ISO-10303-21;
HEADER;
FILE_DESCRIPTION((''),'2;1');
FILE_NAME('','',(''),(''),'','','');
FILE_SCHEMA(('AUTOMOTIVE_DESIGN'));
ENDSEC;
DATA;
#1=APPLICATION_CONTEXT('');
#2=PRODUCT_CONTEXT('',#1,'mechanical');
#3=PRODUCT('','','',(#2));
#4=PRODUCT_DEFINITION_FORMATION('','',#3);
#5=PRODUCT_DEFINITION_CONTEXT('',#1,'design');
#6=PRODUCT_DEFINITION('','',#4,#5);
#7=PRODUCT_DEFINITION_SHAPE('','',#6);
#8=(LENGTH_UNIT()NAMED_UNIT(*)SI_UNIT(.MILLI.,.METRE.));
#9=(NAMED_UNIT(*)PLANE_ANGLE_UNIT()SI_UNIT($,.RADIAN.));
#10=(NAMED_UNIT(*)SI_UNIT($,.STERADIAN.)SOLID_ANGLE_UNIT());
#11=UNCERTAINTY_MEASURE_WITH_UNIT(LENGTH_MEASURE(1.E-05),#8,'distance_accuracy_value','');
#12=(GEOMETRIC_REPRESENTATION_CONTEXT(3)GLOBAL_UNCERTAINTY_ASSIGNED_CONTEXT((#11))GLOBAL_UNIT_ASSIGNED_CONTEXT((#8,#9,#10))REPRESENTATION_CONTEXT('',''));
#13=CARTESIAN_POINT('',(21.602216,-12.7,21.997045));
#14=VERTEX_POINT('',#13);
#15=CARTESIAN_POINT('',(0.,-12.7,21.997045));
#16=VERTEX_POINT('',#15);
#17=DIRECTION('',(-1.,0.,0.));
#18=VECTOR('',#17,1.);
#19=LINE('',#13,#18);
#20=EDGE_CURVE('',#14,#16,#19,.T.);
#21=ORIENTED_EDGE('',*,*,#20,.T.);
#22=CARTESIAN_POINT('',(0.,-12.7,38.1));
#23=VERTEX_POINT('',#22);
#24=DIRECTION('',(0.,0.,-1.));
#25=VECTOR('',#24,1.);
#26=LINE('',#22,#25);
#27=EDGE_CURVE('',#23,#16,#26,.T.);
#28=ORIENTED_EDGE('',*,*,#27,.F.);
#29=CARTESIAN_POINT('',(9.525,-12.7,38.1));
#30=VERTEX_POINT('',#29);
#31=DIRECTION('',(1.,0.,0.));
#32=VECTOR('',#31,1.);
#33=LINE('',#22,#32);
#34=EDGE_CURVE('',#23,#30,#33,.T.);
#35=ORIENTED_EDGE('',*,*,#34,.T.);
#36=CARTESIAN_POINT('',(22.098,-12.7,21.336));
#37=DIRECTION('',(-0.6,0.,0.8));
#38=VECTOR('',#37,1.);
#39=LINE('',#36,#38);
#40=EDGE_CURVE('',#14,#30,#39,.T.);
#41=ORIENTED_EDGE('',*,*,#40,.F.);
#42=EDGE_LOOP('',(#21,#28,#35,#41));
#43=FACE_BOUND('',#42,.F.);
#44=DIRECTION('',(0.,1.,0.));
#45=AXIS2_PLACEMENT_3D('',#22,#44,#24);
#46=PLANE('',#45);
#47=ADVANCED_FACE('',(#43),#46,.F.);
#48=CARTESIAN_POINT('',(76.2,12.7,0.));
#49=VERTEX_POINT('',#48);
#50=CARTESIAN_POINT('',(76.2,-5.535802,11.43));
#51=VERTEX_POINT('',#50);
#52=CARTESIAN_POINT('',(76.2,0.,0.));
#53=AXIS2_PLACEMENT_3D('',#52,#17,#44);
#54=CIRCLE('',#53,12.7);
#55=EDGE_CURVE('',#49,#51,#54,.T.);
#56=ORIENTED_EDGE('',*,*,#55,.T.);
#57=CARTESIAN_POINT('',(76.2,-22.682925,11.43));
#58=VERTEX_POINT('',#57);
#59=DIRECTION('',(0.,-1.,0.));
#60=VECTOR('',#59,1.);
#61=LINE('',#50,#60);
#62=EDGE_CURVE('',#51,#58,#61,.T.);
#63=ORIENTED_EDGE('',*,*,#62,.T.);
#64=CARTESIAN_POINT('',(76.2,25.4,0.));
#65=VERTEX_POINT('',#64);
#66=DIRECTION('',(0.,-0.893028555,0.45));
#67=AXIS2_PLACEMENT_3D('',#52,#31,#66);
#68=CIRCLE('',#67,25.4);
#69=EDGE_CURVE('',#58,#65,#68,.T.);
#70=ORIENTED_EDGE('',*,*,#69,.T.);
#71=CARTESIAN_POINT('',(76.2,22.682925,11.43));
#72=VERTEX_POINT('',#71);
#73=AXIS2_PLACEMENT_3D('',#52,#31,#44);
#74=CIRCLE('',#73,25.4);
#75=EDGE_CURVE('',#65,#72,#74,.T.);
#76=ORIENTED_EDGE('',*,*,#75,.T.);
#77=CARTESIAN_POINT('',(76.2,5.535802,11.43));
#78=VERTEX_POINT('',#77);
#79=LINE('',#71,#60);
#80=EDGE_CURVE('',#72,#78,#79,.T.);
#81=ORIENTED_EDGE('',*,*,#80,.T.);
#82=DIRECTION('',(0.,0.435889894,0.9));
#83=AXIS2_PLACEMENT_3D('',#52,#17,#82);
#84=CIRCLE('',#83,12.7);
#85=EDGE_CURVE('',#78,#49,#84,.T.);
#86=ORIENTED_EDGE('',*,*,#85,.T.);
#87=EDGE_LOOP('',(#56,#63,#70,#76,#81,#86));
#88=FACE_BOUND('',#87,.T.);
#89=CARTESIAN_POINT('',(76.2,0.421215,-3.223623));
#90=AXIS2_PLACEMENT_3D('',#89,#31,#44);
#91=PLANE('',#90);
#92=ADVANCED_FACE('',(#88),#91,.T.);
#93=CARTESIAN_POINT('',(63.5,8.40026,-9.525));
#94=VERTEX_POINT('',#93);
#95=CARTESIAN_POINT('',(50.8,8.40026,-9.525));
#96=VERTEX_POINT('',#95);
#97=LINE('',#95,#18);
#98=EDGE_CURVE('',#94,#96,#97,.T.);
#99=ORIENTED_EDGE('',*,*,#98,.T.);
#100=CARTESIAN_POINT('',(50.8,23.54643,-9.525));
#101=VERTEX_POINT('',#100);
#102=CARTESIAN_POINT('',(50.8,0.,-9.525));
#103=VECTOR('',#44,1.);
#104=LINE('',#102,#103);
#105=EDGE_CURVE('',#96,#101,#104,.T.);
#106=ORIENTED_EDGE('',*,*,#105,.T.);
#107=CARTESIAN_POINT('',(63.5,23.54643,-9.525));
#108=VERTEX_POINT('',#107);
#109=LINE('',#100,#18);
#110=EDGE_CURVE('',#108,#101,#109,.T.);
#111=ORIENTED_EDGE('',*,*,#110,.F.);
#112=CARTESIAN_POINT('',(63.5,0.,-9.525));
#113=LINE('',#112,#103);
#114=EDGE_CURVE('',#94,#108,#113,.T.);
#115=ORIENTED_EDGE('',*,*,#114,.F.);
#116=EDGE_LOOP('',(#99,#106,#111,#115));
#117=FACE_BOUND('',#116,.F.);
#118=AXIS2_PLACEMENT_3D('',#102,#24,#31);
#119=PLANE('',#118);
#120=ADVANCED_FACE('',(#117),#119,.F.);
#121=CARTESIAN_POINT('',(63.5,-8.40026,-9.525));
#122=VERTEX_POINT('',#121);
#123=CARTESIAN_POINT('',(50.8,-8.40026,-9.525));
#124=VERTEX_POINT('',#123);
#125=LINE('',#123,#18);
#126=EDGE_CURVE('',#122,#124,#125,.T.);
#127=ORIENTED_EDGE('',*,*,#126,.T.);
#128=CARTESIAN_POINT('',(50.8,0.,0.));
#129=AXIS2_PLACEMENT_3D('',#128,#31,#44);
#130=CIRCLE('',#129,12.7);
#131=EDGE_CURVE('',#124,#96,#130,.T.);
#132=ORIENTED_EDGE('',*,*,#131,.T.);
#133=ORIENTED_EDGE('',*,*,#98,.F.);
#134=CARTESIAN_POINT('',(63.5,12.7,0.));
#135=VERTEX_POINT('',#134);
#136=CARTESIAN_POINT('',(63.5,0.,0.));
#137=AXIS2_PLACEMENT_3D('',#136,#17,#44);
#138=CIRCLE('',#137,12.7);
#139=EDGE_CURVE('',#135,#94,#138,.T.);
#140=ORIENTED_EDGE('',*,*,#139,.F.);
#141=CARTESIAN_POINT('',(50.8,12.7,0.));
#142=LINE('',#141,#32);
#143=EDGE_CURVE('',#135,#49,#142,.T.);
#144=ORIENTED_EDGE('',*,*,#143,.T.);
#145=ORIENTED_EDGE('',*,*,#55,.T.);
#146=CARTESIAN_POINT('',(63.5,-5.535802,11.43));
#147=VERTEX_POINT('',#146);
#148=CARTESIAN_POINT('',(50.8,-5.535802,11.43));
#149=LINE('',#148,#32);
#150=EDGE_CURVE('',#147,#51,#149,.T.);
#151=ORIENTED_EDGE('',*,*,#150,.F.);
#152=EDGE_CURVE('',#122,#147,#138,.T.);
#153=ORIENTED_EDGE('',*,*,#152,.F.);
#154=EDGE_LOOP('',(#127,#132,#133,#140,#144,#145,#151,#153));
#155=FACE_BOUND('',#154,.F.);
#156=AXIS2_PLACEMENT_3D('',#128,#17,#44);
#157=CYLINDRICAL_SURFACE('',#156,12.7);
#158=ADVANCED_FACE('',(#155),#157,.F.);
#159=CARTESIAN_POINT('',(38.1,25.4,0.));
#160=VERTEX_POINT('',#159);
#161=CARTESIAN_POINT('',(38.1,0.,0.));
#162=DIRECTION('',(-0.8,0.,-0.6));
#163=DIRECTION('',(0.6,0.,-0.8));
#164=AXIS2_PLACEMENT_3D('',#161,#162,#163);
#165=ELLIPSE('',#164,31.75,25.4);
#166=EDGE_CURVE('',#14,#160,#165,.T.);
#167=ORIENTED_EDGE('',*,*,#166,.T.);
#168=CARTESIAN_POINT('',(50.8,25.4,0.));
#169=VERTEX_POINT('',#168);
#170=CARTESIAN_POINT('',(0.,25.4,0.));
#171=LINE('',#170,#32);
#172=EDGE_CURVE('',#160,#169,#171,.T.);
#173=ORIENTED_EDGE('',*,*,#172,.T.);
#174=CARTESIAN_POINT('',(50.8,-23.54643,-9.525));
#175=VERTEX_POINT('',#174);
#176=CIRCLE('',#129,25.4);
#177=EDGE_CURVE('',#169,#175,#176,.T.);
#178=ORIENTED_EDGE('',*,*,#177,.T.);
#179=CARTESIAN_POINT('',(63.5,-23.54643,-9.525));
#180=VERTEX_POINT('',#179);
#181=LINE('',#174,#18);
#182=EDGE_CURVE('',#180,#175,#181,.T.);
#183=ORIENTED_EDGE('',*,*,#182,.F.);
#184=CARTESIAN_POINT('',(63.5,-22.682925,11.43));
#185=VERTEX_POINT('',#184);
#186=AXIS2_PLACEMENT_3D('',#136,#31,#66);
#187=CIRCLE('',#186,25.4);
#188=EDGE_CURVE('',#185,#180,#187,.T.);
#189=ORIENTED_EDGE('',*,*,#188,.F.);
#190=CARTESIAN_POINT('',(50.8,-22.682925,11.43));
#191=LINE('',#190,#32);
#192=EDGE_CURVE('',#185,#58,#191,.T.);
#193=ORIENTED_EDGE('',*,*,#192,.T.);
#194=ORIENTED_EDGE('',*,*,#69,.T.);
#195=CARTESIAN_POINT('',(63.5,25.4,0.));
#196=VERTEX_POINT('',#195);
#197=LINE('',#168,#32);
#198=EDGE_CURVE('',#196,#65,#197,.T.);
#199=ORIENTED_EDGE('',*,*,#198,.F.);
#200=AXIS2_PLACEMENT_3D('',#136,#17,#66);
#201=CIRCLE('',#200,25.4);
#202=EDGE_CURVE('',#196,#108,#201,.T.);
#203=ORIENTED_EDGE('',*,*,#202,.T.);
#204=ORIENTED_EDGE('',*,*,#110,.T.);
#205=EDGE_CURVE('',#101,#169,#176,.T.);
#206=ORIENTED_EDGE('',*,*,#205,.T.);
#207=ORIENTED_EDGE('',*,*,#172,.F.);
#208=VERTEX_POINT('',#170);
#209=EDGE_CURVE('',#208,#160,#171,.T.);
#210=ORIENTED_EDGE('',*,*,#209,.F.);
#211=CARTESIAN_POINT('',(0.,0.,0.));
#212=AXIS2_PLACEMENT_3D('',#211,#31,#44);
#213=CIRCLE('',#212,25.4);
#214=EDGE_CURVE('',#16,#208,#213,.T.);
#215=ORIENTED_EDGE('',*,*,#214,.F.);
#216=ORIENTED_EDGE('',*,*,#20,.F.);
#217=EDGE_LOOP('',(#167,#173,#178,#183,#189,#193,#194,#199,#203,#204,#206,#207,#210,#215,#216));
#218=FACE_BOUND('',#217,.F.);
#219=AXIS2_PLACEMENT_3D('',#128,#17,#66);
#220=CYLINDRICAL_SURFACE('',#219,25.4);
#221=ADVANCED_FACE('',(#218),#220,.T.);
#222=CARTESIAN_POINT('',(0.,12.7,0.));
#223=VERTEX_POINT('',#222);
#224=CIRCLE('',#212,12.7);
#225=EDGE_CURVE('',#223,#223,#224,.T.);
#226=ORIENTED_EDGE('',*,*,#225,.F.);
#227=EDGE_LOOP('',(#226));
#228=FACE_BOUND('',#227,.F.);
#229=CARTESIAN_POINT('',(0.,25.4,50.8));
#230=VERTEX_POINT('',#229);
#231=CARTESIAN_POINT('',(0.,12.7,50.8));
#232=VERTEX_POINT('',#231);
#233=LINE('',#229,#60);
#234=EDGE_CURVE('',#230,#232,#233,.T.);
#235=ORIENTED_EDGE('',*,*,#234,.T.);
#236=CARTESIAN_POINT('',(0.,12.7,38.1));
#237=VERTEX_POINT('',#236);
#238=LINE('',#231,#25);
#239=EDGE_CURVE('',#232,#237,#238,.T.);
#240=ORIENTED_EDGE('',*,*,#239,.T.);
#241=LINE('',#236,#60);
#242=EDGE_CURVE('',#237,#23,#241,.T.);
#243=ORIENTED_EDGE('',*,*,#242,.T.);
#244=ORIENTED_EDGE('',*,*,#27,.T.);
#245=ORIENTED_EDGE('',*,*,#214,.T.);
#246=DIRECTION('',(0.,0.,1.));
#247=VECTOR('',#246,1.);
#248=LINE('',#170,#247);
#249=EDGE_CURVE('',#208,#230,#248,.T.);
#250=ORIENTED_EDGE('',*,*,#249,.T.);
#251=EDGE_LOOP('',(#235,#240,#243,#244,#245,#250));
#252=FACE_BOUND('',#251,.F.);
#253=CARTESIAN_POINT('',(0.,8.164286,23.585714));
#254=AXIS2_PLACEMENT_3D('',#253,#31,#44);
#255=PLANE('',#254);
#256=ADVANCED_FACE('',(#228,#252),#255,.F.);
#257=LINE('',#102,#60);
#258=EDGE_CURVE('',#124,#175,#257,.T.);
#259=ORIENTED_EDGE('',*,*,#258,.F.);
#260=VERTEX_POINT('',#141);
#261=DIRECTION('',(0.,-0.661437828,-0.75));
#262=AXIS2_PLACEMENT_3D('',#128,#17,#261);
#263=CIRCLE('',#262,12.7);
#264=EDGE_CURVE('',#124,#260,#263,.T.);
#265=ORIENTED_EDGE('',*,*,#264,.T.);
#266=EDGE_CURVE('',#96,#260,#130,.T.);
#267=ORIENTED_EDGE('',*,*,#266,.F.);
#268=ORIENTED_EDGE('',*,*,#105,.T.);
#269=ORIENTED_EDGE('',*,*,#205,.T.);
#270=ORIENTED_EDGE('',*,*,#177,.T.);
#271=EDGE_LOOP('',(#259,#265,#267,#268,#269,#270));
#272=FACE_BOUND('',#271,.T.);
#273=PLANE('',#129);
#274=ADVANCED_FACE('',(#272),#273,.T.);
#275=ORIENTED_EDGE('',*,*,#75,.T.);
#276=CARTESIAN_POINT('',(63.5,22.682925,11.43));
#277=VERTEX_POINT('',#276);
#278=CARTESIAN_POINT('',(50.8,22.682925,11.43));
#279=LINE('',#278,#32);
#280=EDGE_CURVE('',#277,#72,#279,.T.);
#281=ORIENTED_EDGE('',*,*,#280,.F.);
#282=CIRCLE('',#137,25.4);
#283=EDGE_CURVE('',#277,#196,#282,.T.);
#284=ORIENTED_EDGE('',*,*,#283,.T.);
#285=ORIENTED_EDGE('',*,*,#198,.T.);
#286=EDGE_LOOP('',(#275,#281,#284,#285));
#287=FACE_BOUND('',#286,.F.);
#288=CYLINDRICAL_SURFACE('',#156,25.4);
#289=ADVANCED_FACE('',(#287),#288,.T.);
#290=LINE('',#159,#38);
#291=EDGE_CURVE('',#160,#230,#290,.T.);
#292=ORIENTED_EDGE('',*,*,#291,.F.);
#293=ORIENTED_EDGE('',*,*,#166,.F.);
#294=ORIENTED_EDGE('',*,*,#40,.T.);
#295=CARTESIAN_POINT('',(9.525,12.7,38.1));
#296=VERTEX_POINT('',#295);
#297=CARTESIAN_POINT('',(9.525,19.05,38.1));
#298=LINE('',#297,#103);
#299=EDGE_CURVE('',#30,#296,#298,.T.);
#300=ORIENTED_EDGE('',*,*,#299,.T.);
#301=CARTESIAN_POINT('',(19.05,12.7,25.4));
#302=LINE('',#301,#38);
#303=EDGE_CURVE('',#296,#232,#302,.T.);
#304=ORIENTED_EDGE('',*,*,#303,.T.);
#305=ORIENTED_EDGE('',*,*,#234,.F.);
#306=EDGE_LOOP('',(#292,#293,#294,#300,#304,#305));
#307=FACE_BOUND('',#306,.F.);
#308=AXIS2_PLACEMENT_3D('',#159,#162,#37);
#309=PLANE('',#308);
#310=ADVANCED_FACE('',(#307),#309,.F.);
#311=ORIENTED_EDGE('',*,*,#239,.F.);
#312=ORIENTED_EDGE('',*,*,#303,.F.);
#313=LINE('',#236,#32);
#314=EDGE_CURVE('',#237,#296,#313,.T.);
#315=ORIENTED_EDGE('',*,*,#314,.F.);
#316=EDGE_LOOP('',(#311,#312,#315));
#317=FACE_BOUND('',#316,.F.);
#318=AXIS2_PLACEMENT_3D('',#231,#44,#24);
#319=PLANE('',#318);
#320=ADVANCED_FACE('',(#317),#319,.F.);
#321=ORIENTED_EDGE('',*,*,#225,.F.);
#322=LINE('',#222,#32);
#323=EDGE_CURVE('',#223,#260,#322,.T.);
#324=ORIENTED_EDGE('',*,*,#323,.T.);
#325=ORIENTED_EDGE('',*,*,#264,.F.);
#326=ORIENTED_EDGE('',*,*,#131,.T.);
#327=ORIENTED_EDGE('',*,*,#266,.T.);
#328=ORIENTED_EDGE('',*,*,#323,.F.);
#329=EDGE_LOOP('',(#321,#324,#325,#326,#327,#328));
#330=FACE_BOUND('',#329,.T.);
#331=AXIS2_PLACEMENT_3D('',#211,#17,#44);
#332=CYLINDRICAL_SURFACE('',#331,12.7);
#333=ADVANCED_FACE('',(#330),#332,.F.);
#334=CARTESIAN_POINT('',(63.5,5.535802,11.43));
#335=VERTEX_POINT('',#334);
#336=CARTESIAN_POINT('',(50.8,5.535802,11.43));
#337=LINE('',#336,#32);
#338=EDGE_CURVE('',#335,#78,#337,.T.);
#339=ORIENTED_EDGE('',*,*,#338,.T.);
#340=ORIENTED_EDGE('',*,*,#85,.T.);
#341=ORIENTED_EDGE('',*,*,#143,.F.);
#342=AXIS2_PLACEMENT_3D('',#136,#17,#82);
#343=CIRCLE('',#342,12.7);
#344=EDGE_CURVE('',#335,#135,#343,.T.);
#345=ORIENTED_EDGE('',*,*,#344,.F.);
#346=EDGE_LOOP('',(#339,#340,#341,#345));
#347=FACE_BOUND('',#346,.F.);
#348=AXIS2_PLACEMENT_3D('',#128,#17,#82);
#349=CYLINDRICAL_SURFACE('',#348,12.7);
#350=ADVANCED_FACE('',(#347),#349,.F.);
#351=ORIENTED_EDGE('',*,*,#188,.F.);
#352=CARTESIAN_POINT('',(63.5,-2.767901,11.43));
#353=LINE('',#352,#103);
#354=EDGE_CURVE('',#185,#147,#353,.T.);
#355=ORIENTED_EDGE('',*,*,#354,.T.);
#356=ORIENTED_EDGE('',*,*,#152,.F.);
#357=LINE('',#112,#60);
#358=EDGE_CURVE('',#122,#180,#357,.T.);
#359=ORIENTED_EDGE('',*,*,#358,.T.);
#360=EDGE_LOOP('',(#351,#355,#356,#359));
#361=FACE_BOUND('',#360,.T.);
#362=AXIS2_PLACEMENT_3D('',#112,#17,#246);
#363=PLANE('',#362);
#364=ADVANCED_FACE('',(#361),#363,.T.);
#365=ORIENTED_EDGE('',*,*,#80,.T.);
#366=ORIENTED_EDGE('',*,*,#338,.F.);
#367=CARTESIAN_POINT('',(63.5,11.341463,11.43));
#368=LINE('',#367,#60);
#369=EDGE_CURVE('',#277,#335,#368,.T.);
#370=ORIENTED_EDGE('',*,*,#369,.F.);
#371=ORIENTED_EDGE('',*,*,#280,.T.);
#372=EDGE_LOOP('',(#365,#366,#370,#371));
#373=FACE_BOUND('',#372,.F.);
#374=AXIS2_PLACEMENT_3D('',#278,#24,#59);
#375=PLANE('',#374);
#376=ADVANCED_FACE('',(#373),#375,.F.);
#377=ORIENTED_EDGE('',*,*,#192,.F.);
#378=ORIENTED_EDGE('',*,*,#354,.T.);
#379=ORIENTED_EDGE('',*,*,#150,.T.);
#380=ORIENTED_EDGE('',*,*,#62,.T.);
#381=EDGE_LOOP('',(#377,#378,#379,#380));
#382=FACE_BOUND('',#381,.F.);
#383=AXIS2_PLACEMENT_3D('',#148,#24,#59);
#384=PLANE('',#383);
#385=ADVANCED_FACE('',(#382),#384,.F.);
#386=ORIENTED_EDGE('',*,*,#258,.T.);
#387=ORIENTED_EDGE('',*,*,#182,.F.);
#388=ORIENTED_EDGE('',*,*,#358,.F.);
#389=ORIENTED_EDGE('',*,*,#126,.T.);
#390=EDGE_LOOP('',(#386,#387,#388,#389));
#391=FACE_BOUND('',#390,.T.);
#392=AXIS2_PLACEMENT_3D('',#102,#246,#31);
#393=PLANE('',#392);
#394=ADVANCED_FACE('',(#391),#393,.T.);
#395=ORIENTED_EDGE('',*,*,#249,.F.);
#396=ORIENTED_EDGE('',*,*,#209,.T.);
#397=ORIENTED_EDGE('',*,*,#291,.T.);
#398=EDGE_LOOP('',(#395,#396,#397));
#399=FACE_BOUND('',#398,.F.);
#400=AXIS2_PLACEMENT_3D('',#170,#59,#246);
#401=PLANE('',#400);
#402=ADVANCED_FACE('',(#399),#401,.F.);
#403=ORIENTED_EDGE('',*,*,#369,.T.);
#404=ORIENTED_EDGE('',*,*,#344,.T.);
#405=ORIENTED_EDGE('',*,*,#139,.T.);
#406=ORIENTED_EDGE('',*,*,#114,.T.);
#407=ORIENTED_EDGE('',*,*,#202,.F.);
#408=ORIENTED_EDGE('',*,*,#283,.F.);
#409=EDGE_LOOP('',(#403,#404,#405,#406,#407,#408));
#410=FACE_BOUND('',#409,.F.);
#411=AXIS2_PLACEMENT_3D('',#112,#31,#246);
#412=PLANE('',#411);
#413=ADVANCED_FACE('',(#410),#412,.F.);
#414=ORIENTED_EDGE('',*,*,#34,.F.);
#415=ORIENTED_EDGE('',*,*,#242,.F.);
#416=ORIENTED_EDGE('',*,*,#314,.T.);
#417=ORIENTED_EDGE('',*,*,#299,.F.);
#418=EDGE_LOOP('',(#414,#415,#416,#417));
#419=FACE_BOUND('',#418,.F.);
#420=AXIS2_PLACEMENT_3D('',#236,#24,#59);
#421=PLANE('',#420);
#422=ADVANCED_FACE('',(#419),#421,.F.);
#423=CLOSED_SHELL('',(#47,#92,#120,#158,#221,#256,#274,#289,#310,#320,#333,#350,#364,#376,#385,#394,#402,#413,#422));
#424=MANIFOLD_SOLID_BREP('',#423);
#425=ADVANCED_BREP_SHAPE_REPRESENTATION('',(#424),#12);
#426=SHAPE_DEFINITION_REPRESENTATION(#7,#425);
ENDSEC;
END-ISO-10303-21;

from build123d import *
from build123d import SkipClean  # not in build123d's __all__

# Parameters (mm, degrees)
F0_R           = 25.4
F0_R_2         = 12.7
F1_DEPTH       = 50.8
F3_DEPTH       = 38.1
F5_DEPTH       = 50.801
F6_DEPTH       = 25.4
F7_DEPTH       = 50.801
F9_DEPTH       = 25.4
F10_W          = 12.7
F10_H          = 34.925
F11_DEPTH      = 25.401
F11_DEPTH_BACK = 25.4


# Not quite as in the source:
# - a feature names something its author has since deleted; it is built from what else it names


with BuildPart() as f1:
    # F0 (on Right) → F1 (new body)
    with BuildSketch(Plane.YZ):
        Circle(F0_R)
        Circle(F0_R_2, mode=Mode.SUBTRACT)
    extrude(amount=F1_DEPTH)

    # F2 (on Right) → F3 (join)
    with BuildSketch(Plane.YZ):
        Polygon((-12.7, 38.1), (-12.7, 0), (25.4, 0), (25.4, 50.8), (12.7, 50.8), (12.7, 38.1), align=None)
    extrude(amount=F3_DEPTH)

    # F4 (on face) → F5 (cut, through all)
    with BuildSketch(Plane(origin=(0, 25.4, 0), x_dir=(-1, 0, 0), z_dir=(0, 1, 0))):
        Polygon((-38.1, 0), (0, 50.8), (-38.1, 50.8), align=None)
    extrude(amount=-F5_DEPTH, mode=Mode.SUBTRACT)

    # F6 (add): a face of the model
    f6_faces = [f1.faces().sort_by_distance(p)[0] for p in [
        (38.1, 19.05, 0.5679612663),
    ]]
    extrude(f6_faces, amount=F6_DEPTH)

    # F0 (on Right) → F7 (cut, through all)
    with BuildSketch(Plane.YZ):
        Circle(F0_R_2)
    extrude(amount=F7_DEPTH, mode=Mode.SUBTRACT)

    # F8 (on face) → F9 (join)
    with BuildSketch(Plane.YZ.offset(50.8)):
        with BuildLine():
            Line((-5.5358016583, 11.43), (-22.6829252964, 11.43))
            ThreePointArc((-22.6829252964, 11.43), (-5.8742530365, -24.7113971937), (25.4, 0))
            ThreePointArc((25.4, 0), (24.7113971937, 5.8742530365), (22.6829252964, 11.43))
            Line((22.6829252964, 11.43), (5.5358016583, 11.43))
            ThreePointArc((5.5358016583, 11.43), (10.7609172718, 6.7448246434), (12.7, 0))
            ThreePointArc((12.7, 0), (-6.7448246434, -10.7609172718), (-5.5358016583, 11.43))
        make_face()
    with SkipClean():  # cleaning this boolean's faces spoils the solid; the shape is the same uncleaned
        extrude(amount=F9_DEPTH)

    # F10 (on Front) → F11 (cut, two sides)
    with BuildSketch(Plane.XZ) as f11_sk:
        with Locations((57.15, 7.9375)):
            Rectangle(F10_W, F10_H)
    extrude(amount=-F11_DEPTH, mode=Mode.SUBTRACT)
    extrude(f11_sk.sketch, amount=F11_DEPTH_BACK, mode=Mode.SUBTRACT)


solid = f1.part
